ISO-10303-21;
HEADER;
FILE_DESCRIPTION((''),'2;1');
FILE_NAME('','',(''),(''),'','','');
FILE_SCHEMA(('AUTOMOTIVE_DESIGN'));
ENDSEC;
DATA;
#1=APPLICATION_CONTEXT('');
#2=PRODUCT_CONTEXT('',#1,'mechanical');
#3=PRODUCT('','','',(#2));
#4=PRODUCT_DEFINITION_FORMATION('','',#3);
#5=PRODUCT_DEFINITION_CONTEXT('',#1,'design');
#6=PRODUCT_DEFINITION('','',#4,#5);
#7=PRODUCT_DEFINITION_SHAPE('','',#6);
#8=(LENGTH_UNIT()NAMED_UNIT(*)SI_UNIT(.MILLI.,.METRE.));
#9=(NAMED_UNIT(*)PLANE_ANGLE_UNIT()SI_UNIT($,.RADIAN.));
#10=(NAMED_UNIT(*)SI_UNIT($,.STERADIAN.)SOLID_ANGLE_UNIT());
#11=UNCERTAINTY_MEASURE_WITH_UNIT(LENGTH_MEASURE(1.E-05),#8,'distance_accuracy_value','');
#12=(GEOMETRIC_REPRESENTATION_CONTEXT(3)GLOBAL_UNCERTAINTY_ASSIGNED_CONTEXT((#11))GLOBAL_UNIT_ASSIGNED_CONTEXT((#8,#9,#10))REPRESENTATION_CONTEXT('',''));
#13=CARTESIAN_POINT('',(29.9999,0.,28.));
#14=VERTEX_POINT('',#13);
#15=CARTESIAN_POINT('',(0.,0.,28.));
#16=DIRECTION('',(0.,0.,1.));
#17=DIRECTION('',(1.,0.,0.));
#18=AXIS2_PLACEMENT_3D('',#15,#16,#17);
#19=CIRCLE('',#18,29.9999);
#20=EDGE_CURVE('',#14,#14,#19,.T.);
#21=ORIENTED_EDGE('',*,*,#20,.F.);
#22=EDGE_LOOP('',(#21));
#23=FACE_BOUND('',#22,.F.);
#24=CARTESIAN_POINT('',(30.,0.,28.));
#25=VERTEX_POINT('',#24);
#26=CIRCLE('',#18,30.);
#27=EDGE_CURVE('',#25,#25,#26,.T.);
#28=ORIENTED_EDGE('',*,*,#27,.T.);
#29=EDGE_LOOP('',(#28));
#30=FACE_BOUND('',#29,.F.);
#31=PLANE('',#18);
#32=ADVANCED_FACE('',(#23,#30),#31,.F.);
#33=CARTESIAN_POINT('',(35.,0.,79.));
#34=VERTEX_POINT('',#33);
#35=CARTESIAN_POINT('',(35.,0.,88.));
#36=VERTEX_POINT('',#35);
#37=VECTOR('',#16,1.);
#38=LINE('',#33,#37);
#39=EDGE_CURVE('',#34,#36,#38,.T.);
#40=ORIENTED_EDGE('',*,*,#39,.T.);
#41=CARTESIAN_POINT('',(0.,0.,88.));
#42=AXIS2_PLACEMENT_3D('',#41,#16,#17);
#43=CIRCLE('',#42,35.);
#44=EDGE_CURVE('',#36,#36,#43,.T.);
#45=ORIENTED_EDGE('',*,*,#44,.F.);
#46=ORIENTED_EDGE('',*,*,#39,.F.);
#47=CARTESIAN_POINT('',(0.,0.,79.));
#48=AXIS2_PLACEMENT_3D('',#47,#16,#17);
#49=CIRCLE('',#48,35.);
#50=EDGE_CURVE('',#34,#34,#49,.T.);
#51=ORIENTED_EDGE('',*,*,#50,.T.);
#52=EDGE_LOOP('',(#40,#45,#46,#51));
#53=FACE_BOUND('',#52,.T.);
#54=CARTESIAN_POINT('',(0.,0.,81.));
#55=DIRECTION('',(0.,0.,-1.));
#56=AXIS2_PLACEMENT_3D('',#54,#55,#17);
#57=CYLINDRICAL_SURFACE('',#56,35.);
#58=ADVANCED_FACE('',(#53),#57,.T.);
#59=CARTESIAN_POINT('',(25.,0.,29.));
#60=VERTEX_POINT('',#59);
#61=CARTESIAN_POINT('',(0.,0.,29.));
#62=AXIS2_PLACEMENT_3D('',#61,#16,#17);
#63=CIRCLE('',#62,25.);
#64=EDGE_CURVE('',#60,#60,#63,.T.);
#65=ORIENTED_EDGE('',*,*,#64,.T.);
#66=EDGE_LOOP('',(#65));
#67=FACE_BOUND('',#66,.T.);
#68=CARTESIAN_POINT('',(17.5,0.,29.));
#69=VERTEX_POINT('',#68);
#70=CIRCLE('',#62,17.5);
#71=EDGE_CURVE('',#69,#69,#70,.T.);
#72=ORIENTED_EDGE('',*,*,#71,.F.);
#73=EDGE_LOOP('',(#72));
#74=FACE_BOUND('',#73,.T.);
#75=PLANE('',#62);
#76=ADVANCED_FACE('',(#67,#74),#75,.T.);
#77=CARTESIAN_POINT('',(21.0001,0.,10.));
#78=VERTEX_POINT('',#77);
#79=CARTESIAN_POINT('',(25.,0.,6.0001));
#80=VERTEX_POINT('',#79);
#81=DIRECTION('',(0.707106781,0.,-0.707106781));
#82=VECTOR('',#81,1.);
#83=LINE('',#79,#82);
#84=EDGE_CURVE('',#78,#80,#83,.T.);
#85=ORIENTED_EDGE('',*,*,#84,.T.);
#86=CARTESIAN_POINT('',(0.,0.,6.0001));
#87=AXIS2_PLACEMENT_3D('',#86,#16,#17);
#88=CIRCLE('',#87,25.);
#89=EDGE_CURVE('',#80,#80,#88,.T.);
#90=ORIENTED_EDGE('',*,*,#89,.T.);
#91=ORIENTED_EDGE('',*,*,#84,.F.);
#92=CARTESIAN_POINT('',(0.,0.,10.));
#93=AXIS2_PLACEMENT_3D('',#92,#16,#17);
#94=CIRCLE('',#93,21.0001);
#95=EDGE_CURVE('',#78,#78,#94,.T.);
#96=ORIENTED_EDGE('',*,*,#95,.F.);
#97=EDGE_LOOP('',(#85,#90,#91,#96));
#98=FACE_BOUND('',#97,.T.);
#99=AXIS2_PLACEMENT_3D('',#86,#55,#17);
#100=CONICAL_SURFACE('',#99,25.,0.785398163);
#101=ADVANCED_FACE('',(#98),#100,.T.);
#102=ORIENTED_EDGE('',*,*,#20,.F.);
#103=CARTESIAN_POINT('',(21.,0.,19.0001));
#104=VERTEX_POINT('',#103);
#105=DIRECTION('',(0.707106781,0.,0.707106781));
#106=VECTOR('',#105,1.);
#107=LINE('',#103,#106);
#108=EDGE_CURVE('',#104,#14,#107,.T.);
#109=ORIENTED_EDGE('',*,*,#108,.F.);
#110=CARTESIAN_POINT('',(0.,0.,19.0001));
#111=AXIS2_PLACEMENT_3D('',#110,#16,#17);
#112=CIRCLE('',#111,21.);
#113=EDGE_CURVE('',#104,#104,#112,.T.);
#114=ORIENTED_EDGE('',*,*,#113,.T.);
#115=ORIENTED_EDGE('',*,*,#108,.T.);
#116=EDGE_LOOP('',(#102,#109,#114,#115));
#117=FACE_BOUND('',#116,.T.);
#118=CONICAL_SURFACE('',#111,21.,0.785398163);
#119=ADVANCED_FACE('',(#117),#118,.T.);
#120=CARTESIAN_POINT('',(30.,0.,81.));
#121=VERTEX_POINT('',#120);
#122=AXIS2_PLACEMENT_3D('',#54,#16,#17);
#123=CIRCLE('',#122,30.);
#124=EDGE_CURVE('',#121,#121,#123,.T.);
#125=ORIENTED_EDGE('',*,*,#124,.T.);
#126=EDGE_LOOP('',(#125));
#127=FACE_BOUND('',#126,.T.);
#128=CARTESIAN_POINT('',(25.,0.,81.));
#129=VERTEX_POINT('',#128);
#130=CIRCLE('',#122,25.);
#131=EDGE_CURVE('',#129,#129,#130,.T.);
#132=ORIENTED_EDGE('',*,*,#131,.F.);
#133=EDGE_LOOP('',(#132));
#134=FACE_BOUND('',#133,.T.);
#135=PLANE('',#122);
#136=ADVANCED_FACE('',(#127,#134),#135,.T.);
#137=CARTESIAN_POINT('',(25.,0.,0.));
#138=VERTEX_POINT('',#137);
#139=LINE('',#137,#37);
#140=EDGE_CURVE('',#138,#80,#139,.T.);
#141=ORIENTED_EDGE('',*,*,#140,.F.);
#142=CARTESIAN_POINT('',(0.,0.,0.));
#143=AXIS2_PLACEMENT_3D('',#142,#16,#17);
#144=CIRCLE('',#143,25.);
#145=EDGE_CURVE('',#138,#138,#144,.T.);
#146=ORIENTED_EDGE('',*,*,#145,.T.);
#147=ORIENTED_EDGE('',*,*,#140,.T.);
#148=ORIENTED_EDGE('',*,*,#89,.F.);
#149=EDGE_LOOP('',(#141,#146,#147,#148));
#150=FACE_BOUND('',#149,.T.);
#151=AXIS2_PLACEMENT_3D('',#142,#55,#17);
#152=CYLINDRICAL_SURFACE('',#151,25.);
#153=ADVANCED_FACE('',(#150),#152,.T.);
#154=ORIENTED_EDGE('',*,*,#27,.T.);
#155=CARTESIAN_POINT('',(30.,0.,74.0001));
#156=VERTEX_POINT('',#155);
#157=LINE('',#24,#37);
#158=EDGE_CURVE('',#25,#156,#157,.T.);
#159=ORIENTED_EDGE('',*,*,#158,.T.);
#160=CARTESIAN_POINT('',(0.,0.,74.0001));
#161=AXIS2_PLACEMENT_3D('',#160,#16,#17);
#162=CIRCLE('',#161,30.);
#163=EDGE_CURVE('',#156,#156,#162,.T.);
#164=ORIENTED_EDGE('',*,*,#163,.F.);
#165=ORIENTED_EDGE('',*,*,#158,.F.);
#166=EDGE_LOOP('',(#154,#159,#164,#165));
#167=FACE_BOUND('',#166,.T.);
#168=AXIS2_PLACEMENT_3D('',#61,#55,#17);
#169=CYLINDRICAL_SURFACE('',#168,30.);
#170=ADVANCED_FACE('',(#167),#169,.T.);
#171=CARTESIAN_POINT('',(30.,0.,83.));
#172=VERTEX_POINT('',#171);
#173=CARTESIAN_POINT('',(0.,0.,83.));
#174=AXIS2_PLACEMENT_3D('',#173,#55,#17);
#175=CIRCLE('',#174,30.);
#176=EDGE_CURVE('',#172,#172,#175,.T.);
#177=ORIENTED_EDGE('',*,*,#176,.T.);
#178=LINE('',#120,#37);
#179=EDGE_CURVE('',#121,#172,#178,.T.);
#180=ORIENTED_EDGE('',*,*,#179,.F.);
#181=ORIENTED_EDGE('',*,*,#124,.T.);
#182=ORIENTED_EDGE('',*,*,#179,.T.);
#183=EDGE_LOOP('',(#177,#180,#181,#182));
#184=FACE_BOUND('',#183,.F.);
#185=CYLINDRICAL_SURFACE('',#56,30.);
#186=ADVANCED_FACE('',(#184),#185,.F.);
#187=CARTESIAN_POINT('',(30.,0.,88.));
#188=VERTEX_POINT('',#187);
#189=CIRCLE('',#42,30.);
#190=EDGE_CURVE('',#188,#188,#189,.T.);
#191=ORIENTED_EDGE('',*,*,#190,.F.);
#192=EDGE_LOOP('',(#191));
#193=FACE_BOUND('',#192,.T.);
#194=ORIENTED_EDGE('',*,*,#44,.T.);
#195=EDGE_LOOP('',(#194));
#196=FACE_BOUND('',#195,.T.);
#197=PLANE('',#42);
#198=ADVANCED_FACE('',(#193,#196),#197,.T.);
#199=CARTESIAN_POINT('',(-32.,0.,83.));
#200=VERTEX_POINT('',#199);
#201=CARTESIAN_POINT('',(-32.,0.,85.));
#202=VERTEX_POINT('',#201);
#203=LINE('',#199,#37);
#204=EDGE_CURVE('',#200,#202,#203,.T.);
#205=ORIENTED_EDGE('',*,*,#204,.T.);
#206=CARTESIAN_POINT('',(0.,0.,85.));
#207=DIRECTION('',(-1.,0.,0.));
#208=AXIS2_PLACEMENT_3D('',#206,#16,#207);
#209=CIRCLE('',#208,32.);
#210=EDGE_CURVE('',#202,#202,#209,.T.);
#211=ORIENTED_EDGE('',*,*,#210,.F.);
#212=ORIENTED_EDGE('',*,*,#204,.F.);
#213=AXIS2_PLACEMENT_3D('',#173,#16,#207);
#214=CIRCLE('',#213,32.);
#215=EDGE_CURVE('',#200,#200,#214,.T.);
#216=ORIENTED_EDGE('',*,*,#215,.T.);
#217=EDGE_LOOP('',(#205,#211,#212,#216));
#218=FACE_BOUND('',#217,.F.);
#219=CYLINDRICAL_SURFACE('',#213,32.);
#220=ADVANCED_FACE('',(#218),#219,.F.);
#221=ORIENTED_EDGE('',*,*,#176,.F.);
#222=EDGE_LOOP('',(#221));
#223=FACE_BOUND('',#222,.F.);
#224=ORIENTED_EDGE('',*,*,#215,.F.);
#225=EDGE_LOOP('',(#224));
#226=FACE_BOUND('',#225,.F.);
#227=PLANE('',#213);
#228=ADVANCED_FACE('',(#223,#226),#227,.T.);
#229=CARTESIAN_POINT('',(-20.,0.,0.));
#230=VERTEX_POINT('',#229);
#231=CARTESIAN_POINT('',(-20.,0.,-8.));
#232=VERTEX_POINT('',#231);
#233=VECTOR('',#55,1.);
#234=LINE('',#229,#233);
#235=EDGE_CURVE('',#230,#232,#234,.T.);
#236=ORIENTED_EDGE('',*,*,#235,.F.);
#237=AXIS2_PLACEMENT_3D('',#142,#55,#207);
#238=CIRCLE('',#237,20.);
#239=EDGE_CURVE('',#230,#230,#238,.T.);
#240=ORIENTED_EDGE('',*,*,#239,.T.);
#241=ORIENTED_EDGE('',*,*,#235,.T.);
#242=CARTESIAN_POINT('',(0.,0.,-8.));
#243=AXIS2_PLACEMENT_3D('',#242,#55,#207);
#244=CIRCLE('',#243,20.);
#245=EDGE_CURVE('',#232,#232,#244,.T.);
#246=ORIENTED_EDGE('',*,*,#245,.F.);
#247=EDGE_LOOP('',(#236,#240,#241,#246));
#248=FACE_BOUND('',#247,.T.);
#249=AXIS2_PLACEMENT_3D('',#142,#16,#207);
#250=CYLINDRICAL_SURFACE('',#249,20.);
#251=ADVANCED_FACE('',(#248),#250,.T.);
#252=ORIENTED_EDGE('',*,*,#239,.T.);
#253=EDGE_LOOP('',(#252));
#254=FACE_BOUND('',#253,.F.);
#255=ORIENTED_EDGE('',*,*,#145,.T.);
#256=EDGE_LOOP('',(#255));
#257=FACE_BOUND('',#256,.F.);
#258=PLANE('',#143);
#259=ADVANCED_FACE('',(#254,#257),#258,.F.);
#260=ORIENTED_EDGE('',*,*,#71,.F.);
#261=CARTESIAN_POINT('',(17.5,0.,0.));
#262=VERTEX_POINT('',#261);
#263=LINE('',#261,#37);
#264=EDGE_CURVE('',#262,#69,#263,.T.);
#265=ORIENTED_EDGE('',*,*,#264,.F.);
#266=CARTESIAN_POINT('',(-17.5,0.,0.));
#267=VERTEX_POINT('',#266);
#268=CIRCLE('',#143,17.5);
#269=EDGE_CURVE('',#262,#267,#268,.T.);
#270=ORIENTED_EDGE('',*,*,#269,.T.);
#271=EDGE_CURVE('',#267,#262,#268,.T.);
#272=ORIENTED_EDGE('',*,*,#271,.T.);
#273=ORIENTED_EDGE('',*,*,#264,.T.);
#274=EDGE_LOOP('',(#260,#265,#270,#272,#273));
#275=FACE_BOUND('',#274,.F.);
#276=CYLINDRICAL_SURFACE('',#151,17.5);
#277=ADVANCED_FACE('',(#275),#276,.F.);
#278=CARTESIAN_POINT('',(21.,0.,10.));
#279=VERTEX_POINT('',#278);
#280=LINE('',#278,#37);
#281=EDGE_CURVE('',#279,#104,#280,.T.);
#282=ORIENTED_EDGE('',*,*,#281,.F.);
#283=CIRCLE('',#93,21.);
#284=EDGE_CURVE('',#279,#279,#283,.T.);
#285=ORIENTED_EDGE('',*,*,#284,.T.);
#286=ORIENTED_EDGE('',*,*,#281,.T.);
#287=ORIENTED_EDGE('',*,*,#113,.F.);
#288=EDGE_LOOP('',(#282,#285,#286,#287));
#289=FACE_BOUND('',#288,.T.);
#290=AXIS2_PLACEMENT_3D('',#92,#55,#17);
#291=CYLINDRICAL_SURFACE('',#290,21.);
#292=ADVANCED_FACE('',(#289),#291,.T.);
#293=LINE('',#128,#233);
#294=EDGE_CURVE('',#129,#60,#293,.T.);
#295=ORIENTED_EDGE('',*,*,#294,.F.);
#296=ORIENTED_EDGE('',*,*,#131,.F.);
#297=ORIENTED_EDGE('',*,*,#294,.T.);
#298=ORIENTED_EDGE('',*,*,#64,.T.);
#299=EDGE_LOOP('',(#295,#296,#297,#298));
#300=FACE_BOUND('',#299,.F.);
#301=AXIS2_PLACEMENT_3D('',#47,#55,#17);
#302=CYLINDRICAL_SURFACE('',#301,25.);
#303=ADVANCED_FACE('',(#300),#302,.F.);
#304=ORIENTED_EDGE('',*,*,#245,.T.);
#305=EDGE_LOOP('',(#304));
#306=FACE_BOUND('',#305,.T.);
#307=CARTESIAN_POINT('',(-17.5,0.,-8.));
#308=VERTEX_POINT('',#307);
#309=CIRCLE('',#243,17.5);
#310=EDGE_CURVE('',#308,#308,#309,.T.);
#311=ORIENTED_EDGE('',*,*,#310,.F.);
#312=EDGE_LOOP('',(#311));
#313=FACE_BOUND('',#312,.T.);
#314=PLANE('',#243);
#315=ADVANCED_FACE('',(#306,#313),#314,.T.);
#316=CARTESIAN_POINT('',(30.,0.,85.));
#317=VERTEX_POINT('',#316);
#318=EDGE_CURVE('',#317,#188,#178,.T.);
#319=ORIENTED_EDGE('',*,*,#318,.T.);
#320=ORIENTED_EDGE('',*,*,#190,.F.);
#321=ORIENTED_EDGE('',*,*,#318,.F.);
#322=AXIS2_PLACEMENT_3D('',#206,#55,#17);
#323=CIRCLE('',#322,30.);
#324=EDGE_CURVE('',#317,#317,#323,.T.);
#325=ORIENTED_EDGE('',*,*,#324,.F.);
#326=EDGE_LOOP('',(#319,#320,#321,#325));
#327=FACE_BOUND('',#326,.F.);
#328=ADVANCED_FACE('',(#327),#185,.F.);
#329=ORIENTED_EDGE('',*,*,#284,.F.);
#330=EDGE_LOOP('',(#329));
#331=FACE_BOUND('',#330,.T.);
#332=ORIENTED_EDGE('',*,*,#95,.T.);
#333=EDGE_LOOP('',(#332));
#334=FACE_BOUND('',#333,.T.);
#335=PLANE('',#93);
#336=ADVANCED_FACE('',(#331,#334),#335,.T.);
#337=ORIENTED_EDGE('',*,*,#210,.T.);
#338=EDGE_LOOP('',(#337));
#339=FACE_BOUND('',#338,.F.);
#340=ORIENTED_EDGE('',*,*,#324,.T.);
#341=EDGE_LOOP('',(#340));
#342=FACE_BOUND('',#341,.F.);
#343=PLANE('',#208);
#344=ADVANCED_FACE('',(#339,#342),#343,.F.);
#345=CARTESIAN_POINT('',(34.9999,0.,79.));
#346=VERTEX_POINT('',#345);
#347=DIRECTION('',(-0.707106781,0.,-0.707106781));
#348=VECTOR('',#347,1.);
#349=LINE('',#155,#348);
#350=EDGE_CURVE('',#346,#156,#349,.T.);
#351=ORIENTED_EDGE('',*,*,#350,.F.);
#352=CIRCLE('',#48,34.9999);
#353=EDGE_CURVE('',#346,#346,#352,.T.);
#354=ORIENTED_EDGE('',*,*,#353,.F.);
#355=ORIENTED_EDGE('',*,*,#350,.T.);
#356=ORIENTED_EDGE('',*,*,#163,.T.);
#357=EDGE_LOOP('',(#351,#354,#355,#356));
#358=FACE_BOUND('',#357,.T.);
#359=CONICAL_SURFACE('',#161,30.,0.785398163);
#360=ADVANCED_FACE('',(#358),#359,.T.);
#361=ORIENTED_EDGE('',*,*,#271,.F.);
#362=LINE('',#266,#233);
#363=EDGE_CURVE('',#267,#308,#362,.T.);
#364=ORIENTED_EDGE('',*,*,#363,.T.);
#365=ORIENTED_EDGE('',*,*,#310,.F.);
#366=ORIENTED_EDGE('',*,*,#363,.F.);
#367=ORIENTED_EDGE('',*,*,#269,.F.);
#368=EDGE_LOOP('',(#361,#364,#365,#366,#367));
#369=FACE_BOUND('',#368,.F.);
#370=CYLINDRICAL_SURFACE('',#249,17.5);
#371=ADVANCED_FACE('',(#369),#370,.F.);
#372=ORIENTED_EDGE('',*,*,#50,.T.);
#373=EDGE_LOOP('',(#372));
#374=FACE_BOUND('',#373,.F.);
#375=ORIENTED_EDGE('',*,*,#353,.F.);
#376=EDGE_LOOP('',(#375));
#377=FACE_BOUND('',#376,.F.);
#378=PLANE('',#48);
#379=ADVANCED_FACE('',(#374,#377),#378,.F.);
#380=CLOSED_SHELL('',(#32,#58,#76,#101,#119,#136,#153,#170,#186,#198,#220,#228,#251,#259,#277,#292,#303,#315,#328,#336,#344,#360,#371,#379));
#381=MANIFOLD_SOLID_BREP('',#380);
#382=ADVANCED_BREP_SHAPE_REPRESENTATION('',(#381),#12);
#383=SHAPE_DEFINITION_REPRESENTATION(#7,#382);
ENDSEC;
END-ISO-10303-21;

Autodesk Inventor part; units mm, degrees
ref_plane "YZ Plane" through (0, 0, 0) normal (1, 0, 0) x (0, 1, 0)
ref_plane "XZ Plane" through (0, 0, 0) normal (0, 1, 0) x (-1, 0, 0)
ref_plane "XY Plane" through (0, 0, 0) normal (0, 0, 1) x (1, 0, 0)
sketch "Эскиз1" plane through (0, 0, 0) normal (0, 0, 1) x (1, 0, 0)
  circle A0 centre (0, 0) radius 17.5
  circle A1 centre (0, 0) radius 25
  dimension "d0" = 35
  dimension "d1" = 50
extrude "Выдавливание1" add sketch "Эскиз1" along normal blind 10
sketch "Эскиз2" plane through (0, 0, 10) normal (0, 0, 1) x (1, 0, 0)
  circle A0 centre (0, 0) radius 17.5 projected
  circle A1 centre (0, 0) radius 21
  dimension "d4" = 42
extrude "Выдавливание2" add sketch "Эскиз2" along normal blind 18
sketch "Эскиз5" plane through (0, 0, 28) normal (0, 0, 1) x (1, 0, 0)
  circle A0 centre (0, 0) radius 21 projected
  circle A1 centre (0, 0) radius 17.5 projected
  circle A2 centre (0, 0) radius 30
  dimension "d20" = 60
extrude "Выдавливание5" add sketch "Эскиз5" along normal blind 1 contours A0 | A2
sketch "Эскиз3" plane through (0, 0, 29) normal (0, 0, 1) x (1, 0, 0)
  circle A0 centre (0, 0) radius 21 projected
  circle A1 centre (0, 0) radius 30
  circle A2 centre (0, 0) radius 25
  dimension "d7" = 60
  dimension "d13" = 50
extrude "Выдавливание3" add sketch "Эскиз3" along normal blind 50 contours A1
chamfer "Фаска1" distance 4 angle 45 1 edges at (-25, 0, 10)
sketch "Эскиз4" plane through (0, 0, 0) normal (0, 0, -1) x (-1, 0, 0)
  circle A0 centre (0, 0) radius 17.5 projected
  circle A1 centre (0, 0) radius 20
  dimension "d17" = 40
extrude "Выдавливание4" add sketch "Эскиз4" along normal blind 8
chamfer "Фаска3" distance 9 angle 45 1 edges at (-21, 0, 28)
sketch "Эскиз6" plane through (0, 0, 79) normal (0, 0, 1) x (1, 0, 0)
  circle A0 centre (0, 0) radius 30 projected
  circle A1 centre (0, 0) radius 25 projected
  circle A2 centre (0, 0) radius 35
  dimension "d26" = 70
extrude "Выдавливание6" add sketch "Эскиз6" along normal blind 2 contours A0 | A2
sketch "Эскиз7" plane through (0, 0, 81) normal (0, 0, 1) x (1, 0, 0)
  circle A0 centre (0, 0) radius 35 projected
  circle A1 centre (0, 0) radius 30
  dimension "d29" = 60
extrude "Выдавливание7" add sketch "Эскиз7" along normal blind 7
chamfer "Фаска4" distance 5 angle 45 1 edges at (-30, 0, 79)
sketch "Эскиз8" plane through (0, 0, 0) normal (0, 1, 0) x (-1, 0, 0)
  line L0 (30, 81) -> (-30, 81) projected
  line L1 (30, 81) -> (30, 83)
  line L2 (30, 88) -> (30, 81) projected
  line L3 (30, 83) -> (32, 83)
  line L4 (32, 83) -> (32, 85)
  line L5 (32, 85) -> (30, 85)
  line L6 (0, -27.2) -> (0, 107.2) projected
  point P0 (0, 0)
  dimension "d35" = 2
  dimension "d36" = 2
  dimension "d37" = 2
revolve "Вращение1" cut sketch "Эскиз8" angle 360 about axis through (0, 0, -10) along (0, 0, 1)
properties part number "Для регулировки 3" material "Сталь, высокопрочная, низколегированная"
